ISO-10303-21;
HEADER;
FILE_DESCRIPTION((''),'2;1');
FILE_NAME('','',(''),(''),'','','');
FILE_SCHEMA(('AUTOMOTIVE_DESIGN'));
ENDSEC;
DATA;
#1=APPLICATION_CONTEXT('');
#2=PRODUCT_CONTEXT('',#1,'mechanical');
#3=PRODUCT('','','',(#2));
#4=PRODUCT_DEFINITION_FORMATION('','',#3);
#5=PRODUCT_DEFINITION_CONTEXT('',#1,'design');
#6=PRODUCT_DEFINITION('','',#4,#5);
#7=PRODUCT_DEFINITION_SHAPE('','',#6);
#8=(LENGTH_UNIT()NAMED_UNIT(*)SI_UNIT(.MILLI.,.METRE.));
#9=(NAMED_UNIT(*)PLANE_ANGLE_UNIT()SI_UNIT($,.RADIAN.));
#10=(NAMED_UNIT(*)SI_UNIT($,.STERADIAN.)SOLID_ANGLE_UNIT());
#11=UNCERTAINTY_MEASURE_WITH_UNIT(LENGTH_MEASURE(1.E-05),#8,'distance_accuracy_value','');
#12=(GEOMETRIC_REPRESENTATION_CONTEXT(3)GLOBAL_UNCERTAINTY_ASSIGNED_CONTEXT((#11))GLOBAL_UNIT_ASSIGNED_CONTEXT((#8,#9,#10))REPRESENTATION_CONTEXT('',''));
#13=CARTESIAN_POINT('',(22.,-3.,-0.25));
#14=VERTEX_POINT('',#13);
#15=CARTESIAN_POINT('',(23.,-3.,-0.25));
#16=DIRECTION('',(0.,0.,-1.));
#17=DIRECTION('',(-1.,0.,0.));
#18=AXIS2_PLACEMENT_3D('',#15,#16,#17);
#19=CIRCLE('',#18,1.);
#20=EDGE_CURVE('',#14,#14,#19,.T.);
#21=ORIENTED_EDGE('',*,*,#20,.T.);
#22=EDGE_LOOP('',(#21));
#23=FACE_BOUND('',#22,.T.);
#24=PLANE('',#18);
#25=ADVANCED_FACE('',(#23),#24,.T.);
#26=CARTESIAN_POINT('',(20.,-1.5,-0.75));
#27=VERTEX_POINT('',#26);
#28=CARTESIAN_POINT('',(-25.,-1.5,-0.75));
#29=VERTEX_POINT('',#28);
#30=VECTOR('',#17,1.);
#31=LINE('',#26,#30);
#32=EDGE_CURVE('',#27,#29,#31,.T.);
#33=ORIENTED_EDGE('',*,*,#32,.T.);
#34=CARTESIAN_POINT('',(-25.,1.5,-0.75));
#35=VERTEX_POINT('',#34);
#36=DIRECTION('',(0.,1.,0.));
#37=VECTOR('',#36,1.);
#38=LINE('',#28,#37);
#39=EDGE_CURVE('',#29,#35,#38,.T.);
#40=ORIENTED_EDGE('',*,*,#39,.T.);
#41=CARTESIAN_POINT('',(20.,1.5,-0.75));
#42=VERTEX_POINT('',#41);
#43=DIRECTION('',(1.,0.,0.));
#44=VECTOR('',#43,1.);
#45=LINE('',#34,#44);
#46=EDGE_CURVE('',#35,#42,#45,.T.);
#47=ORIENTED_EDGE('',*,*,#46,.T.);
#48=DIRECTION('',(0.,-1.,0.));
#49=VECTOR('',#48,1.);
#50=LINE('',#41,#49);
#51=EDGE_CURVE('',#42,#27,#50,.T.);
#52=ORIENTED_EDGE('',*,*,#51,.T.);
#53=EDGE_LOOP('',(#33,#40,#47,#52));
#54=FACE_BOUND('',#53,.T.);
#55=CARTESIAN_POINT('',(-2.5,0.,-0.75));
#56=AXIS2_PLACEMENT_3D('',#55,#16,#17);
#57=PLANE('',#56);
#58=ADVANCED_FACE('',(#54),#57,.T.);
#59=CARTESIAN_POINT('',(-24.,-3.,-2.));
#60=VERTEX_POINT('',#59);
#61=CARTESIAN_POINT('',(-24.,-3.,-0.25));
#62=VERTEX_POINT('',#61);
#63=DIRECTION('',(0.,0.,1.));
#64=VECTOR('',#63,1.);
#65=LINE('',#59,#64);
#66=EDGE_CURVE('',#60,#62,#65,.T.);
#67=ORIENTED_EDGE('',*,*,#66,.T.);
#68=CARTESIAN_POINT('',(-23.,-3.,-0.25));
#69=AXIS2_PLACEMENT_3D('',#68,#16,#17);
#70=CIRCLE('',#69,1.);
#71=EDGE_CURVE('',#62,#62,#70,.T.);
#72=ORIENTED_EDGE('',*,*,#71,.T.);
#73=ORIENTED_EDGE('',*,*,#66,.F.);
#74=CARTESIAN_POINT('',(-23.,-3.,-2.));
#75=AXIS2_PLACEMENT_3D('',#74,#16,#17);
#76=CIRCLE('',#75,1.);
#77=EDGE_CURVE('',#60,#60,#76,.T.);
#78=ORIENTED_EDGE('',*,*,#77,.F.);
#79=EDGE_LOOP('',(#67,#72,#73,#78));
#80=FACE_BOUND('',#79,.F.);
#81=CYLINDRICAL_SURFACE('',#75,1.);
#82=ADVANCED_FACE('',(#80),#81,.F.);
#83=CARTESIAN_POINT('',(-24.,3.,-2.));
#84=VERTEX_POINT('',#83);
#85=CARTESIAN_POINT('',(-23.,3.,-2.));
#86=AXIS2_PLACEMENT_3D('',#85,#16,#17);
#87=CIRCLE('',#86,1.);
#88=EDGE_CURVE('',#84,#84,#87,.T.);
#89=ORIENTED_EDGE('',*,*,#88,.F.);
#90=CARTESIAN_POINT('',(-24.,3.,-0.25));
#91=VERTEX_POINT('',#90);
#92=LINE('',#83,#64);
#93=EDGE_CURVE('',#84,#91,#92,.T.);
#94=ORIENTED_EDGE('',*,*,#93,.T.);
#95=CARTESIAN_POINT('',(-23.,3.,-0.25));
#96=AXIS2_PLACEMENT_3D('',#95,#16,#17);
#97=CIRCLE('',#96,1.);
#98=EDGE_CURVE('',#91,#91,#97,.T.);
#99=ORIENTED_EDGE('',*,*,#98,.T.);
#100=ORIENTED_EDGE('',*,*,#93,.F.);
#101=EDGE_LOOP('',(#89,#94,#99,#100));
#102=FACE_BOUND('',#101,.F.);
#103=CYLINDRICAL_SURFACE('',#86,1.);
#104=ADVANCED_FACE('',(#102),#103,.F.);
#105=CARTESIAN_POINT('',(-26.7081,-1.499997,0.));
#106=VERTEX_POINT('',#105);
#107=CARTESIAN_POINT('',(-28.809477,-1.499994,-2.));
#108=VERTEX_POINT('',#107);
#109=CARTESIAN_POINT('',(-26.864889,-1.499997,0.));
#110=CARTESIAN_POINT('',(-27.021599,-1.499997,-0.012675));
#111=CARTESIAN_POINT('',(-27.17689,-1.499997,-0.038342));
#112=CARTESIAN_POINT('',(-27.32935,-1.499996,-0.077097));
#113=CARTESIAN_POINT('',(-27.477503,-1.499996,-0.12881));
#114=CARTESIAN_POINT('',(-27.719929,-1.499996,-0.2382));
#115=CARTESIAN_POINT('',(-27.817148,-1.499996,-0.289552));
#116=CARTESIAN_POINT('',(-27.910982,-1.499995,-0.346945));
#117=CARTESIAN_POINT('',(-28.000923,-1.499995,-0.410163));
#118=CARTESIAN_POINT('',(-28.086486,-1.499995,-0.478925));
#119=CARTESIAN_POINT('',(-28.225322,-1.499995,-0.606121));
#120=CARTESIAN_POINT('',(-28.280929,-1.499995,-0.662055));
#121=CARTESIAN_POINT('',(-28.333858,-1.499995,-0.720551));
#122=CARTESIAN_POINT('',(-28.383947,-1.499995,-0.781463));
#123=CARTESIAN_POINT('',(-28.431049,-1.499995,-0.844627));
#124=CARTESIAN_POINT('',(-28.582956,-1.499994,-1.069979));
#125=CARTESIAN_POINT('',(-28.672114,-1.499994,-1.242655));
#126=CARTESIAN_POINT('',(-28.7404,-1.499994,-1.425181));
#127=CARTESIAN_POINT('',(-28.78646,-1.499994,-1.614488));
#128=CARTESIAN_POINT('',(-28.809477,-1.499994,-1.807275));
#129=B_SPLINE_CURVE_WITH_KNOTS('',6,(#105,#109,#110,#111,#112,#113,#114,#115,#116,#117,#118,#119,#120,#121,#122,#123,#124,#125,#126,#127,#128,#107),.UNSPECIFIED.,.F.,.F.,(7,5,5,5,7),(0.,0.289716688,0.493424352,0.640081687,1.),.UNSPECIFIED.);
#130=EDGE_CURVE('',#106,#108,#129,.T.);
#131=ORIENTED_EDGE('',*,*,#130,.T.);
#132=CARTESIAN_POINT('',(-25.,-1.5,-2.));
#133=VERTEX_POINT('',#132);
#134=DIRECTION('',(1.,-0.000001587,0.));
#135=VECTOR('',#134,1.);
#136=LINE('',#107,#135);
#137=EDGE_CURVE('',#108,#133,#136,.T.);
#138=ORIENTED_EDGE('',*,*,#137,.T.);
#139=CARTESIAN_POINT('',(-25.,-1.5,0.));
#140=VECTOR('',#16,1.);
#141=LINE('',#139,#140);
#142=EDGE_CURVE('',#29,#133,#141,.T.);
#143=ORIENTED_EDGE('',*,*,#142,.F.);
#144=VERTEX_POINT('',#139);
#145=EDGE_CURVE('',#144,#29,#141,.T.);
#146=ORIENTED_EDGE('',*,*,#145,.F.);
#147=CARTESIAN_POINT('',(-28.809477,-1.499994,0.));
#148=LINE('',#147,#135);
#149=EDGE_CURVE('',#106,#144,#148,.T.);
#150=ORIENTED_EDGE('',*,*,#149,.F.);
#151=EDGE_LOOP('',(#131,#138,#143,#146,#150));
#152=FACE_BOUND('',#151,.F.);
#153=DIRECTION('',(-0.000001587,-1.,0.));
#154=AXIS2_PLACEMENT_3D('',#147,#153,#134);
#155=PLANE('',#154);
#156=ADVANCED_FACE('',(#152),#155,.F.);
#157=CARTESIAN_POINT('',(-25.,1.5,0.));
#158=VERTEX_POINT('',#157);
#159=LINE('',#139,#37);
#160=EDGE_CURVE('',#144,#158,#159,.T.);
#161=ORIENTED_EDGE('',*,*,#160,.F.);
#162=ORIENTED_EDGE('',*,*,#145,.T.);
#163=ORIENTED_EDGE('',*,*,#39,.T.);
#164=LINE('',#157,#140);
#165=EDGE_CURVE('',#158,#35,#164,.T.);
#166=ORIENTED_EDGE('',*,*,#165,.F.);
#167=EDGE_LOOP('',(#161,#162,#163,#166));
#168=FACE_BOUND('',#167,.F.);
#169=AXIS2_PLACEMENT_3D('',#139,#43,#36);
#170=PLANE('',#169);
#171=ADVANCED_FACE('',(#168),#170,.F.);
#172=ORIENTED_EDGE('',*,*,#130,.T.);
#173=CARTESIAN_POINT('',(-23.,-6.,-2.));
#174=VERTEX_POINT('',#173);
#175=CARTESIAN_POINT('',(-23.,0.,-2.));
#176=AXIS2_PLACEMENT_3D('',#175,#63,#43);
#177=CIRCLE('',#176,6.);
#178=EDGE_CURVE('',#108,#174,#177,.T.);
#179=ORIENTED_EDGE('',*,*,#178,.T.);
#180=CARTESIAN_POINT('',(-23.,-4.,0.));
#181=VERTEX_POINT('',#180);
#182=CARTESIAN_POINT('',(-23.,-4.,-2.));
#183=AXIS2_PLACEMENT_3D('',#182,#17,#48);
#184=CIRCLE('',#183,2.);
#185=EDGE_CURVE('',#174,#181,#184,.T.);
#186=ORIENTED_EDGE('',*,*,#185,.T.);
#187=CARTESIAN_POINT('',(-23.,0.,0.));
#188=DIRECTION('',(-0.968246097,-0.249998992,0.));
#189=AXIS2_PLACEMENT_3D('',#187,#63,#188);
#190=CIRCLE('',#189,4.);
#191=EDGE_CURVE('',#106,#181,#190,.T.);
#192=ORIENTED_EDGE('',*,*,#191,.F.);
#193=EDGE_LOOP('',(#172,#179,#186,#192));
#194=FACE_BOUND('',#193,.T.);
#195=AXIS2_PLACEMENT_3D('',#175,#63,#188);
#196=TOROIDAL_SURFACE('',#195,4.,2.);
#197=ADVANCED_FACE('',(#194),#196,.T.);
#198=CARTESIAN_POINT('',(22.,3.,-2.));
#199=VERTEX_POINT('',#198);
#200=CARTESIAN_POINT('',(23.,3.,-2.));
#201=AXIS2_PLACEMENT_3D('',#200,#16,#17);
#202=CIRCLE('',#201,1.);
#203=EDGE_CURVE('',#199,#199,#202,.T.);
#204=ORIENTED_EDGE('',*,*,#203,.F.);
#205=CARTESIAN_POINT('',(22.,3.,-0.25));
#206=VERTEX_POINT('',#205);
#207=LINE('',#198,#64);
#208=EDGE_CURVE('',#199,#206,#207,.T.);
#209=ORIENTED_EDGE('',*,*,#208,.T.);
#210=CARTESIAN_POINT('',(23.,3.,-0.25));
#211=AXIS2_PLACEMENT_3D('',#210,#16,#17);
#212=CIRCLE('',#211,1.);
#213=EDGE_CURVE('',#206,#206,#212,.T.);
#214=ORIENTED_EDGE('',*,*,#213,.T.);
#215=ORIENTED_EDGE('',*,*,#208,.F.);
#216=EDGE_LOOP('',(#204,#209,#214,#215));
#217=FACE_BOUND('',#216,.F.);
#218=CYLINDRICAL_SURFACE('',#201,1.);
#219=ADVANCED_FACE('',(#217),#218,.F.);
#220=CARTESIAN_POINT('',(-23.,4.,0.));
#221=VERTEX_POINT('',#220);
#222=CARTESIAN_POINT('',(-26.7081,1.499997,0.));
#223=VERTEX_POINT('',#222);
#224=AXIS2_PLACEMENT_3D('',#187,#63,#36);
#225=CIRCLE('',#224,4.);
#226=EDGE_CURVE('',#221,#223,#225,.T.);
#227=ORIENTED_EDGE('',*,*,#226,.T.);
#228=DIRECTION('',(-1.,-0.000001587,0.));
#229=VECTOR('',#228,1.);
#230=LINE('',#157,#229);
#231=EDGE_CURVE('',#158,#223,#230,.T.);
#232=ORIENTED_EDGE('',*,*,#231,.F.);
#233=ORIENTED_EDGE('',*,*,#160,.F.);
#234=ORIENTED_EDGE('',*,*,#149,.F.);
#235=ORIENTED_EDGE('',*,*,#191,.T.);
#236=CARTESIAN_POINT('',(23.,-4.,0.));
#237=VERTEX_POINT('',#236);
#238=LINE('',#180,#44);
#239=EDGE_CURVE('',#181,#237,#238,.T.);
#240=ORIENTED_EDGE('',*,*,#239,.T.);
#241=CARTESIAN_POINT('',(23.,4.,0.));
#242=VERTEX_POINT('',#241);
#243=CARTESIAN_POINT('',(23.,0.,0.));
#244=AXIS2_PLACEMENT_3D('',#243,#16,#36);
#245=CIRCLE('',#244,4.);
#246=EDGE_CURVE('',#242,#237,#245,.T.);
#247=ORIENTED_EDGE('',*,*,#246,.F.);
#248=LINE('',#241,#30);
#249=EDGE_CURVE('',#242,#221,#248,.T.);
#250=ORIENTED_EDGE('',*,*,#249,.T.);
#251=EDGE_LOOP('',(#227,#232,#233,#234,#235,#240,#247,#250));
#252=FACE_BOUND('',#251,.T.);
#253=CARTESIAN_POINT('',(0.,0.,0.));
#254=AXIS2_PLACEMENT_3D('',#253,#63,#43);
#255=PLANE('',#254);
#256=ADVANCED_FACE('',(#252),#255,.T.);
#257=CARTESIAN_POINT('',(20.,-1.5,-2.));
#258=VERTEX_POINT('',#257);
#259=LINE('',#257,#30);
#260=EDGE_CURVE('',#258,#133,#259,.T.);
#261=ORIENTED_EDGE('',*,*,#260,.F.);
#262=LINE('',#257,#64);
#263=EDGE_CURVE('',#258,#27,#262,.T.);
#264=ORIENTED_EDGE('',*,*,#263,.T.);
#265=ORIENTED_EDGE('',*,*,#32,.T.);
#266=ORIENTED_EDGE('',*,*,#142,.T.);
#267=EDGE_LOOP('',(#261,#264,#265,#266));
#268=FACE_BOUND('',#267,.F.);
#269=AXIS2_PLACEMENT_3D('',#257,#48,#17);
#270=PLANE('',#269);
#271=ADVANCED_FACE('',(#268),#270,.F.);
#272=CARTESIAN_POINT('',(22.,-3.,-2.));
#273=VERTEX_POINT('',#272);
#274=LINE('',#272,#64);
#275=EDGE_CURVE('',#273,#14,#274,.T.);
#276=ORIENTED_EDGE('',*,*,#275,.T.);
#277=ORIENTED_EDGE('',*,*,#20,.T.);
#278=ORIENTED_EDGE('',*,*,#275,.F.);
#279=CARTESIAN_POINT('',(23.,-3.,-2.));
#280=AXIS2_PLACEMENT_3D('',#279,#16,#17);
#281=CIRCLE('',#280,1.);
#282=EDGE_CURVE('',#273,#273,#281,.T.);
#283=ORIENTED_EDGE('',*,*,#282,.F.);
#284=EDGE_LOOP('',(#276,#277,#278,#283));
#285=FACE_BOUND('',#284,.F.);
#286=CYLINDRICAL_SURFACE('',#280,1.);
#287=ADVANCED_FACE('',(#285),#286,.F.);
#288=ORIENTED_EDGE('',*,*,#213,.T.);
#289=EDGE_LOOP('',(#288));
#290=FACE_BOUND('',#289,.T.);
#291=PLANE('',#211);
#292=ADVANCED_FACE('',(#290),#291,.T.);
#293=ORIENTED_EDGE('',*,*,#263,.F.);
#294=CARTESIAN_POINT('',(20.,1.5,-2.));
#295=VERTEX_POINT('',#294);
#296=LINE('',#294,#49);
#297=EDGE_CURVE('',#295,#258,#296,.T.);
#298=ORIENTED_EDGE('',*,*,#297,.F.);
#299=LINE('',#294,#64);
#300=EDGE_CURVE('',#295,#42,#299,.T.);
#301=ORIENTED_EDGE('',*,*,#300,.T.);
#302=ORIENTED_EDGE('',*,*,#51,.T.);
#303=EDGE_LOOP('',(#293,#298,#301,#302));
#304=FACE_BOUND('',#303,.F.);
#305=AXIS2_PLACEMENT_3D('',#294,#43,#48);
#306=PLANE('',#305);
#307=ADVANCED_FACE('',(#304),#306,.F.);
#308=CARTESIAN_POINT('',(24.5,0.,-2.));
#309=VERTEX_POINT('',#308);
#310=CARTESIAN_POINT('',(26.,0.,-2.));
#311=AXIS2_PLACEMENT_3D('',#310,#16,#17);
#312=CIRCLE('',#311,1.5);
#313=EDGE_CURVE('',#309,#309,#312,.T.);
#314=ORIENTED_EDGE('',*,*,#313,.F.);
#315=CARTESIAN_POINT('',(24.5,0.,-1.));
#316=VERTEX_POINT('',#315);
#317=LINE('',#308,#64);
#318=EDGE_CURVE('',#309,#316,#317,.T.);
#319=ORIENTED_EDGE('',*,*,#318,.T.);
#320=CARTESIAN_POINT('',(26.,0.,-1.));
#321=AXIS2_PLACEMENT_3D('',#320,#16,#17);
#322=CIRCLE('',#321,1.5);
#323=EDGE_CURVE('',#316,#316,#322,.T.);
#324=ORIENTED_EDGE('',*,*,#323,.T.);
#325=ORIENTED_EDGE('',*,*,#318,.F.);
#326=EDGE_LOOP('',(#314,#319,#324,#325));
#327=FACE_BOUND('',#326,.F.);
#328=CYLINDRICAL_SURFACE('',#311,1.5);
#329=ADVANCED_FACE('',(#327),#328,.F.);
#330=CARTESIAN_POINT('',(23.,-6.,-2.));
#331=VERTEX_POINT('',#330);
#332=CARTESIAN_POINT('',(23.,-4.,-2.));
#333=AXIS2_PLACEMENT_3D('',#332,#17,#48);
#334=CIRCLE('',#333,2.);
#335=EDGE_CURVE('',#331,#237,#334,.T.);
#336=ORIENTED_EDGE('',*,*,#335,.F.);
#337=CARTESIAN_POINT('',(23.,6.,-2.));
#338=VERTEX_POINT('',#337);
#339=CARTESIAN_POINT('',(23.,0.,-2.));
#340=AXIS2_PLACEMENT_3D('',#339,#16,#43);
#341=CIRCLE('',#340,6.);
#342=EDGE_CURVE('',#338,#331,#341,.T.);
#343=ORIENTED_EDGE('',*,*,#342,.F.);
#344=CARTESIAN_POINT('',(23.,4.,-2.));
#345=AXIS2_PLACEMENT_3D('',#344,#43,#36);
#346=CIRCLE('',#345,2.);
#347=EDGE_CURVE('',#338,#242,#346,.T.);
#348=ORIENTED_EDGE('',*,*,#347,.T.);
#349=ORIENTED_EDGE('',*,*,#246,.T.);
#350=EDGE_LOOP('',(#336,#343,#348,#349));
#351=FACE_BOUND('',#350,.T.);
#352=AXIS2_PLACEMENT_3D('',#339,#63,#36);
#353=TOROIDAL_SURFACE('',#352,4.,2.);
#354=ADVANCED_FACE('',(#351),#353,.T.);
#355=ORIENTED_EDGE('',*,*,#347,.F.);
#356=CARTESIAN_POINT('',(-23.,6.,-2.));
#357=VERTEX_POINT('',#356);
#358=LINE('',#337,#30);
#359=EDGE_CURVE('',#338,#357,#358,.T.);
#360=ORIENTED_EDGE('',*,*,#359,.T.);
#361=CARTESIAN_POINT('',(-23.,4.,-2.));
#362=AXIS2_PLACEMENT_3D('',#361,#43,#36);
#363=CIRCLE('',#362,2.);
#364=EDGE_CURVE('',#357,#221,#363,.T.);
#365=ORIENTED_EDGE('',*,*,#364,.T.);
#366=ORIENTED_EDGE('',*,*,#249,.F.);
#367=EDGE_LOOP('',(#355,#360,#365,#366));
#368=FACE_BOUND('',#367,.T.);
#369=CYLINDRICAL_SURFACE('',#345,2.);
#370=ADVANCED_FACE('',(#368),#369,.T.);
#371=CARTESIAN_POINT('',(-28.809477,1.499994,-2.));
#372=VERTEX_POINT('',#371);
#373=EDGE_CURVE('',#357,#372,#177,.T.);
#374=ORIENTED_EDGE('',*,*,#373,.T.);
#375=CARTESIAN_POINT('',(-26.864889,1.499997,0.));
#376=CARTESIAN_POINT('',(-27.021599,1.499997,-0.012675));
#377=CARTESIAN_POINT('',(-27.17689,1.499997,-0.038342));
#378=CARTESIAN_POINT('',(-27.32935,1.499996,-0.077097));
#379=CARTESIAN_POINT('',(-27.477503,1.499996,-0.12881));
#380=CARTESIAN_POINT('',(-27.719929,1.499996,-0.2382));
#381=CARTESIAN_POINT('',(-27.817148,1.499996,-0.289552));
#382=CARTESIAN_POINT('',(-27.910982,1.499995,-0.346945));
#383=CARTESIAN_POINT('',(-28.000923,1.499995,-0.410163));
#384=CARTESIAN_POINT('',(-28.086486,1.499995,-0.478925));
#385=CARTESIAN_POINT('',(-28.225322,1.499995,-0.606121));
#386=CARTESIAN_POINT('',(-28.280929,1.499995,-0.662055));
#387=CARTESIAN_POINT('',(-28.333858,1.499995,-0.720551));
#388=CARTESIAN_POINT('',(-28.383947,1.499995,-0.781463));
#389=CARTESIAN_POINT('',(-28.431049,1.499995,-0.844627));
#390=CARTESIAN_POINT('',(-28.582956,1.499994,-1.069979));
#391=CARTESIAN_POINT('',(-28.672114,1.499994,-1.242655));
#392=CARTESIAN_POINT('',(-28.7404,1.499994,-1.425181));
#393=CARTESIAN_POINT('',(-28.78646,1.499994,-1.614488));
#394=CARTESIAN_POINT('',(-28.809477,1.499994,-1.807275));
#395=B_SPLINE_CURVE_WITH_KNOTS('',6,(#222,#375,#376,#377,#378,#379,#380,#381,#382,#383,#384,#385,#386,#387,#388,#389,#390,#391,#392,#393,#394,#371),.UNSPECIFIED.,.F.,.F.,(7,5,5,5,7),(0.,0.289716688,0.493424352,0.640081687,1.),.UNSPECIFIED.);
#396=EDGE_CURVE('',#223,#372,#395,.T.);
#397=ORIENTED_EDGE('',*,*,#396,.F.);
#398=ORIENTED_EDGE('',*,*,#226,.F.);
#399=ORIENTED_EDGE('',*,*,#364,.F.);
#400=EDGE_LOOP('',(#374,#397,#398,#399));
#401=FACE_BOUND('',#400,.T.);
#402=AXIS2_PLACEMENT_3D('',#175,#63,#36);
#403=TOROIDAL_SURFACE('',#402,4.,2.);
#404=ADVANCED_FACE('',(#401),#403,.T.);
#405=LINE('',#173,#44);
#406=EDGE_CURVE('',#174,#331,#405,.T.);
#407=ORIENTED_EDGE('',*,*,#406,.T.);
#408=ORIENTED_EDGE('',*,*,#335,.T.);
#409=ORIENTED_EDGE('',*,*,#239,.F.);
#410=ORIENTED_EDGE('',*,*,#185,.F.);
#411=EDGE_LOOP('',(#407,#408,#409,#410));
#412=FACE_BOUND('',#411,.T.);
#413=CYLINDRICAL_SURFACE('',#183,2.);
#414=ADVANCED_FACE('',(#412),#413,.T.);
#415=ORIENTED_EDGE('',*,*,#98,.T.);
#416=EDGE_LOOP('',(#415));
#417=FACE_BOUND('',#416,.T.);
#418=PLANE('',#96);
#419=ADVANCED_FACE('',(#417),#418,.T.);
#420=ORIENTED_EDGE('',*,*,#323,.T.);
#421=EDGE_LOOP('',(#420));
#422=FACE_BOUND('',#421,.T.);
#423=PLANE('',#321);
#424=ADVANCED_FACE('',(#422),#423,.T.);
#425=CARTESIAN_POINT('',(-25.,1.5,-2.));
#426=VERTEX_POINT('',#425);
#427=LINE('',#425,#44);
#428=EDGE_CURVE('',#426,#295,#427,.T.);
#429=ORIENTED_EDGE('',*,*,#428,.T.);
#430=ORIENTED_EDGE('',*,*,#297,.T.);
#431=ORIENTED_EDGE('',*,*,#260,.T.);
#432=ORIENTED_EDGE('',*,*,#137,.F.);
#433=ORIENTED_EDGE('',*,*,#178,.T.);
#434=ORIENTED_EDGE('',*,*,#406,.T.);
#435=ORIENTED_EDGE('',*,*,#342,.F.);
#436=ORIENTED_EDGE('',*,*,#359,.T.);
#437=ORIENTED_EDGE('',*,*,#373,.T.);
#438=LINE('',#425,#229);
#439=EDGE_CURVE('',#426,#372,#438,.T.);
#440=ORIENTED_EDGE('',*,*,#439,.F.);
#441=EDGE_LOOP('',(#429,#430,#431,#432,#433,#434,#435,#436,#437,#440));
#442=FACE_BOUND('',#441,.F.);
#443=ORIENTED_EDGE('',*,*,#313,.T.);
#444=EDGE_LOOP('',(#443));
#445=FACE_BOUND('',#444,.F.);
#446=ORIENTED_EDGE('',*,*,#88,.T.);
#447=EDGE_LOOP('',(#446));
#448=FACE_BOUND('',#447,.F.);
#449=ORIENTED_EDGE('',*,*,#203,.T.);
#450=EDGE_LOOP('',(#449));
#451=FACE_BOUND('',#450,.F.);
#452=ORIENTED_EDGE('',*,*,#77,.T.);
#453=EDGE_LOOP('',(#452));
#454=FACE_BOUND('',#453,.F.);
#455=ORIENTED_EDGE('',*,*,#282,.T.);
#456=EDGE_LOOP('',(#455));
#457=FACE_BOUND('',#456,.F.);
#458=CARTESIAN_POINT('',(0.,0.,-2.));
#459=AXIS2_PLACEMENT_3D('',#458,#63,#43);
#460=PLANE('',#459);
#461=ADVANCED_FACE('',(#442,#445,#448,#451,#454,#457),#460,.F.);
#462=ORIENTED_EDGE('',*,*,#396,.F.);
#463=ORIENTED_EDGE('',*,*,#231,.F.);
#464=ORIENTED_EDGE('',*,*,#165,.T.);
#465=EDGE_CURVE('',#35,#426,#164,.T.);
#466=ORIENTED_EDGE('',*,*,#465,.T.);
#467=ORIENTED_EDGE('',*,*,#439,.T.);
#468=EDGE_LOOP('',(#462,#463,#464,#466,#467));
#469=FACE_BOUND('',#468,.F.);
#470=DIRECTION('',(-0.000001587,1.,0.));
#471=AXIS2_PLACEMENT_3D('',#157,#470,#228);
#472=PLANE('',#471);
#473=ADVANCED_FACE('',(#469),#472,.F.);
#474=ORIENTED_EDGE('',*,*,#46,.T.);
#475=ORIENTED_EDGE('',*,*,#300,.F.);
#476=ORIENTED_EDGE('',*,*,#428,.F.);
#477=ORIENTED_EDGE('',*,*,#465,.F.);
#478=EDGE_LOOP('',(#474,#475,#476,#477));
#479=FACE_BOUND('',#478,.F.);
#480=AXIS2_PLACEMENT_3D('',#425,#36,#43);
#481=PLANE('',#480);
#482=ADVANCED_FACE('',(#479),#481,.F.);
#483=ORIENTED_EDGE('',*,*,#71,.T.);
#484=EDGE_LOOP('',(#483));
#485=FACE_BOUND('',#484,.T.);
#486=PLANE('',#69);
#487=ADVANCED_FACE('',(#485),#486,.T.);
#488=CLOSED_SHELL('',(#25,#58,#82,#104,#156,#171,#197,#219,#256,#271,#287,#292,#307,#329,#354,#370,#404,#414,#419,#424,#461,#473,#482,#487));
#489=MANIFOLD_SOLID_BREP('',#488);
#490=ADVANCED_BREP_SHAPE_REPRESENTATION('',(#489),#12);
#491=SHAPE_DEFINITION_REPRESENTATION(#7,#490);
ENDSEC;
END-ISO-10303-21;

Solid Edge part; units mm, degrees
sketch "Sketch1" plane through (0, 0, 0) normal (0, 0, 1) x (1, 0, 0)
  line L0 (-23, -6) -> (23, -6)
  arc A0 (23, 6) -> (23, -6) centre (23, 0) cw
  line L1 (23, 6) -> (-23, 6)
  arc A1 (-23, 6) -> (-23, -6) centre (-23, 0) ccw
  arc A2 (-28.8095, 1.5) -> (-28.8095, -1.5) centre (-23, 0) ccw
  line L2 (-28.8095, -1.5) -> (-25, -1.5)
  line L3 (-25, -1.5) -> (-25, 1.5)
  line L4 (-25, 1.5) -> (-28.8095, 1.5)
extrude "Protrusion1" add sketch "Sketch1" against normal blind 2
fillet "Round_1" radius 2 4 edges at (0, -6, 0) (29, 0, 0) (0, 6, 0) (-29, 0, 0)
sketch "Sketch2" plane through (0, 0, 0) normal (0, 0, 1) x (1, 0, 0)
  line L0 (-28.8095, -1.5) -> (-25, -1.5)
  line L1 (-25, -1.5) -> (-25, 1.5)
  line L2 (-25, 1.5) -> (-28.8095, 1.5)
  arc A0 (-28.8095, 1.5) -> (-28.8095, -1.5) centre (-23, 0) ccw
extrude "ExtrudedCutout_1" cut sketch "Sketch2" against normal blind 2
sketch "Sketch3" plane through (0.0953, 0, -2) normal (0, 0, -1) x (-1, 0, 0)
  line L0 (-19.9047, -1.5) -> (25.0953, -1.5)
  line L1 (25.0953, -1.5) -> (25.0953, 1.5)
  line L2 (25.0953, 1.5) -> (-19.9047, 1.5)
  line L3 (-19.9047, 1.5) -> (-19.9047, -1.5)
extrude "ExtrudedCutout_2" cut sketch "Sketch3" against normal blind 1.25
sketch "Sketch4" plane through (0.0953, 0, -2) normal (0, 0, -1) x (-1, 0, 0)
  circle A0 centre (23.0953, -3) radius 1
extrude "ExtrudedCutout_3" cut sketch "Sketch4" against normal blind 1.75
sketch "Sketch5" plane through (0.0953, 0, -2) normal (0, 0, -1) x (-1, 0, 0)
  circle A0 centre (23.0953, 3) radius 1
extrude "ExtrudedCutout_4" cut sketch "Sketch5" against normal blind 1.75
sketch "Sketch6" plane through (0.0953, 0, -2) normal (0, 0, -1) x (-1, 0, 0)
  circle A0 centre (-22.9047, -3) radius 1
extrude "ExtrudedCutout_6" cut sketch "Sketch6" against normal blind 1.75
sketch "Sketch7" plane through (0.0953, 0, -2) normal (0, 0, -1) x (-1, 0, 0)
  circle A0 centre (-22.9047, 3) radius 1
extrude "ExtrudedCutout_7" cut sketch "Sketch7" against normal blind 1.75
sketch "Sketch8" plane through (0.0953, 0, -2) normal (0, 0, -1) x (-1, 0, 0)
  circle A0 centre (-25.9047, 0) radius 1.5
extrude "ExtrudedCutout_8" cut sketch "Sketch8" against normal blind 1
